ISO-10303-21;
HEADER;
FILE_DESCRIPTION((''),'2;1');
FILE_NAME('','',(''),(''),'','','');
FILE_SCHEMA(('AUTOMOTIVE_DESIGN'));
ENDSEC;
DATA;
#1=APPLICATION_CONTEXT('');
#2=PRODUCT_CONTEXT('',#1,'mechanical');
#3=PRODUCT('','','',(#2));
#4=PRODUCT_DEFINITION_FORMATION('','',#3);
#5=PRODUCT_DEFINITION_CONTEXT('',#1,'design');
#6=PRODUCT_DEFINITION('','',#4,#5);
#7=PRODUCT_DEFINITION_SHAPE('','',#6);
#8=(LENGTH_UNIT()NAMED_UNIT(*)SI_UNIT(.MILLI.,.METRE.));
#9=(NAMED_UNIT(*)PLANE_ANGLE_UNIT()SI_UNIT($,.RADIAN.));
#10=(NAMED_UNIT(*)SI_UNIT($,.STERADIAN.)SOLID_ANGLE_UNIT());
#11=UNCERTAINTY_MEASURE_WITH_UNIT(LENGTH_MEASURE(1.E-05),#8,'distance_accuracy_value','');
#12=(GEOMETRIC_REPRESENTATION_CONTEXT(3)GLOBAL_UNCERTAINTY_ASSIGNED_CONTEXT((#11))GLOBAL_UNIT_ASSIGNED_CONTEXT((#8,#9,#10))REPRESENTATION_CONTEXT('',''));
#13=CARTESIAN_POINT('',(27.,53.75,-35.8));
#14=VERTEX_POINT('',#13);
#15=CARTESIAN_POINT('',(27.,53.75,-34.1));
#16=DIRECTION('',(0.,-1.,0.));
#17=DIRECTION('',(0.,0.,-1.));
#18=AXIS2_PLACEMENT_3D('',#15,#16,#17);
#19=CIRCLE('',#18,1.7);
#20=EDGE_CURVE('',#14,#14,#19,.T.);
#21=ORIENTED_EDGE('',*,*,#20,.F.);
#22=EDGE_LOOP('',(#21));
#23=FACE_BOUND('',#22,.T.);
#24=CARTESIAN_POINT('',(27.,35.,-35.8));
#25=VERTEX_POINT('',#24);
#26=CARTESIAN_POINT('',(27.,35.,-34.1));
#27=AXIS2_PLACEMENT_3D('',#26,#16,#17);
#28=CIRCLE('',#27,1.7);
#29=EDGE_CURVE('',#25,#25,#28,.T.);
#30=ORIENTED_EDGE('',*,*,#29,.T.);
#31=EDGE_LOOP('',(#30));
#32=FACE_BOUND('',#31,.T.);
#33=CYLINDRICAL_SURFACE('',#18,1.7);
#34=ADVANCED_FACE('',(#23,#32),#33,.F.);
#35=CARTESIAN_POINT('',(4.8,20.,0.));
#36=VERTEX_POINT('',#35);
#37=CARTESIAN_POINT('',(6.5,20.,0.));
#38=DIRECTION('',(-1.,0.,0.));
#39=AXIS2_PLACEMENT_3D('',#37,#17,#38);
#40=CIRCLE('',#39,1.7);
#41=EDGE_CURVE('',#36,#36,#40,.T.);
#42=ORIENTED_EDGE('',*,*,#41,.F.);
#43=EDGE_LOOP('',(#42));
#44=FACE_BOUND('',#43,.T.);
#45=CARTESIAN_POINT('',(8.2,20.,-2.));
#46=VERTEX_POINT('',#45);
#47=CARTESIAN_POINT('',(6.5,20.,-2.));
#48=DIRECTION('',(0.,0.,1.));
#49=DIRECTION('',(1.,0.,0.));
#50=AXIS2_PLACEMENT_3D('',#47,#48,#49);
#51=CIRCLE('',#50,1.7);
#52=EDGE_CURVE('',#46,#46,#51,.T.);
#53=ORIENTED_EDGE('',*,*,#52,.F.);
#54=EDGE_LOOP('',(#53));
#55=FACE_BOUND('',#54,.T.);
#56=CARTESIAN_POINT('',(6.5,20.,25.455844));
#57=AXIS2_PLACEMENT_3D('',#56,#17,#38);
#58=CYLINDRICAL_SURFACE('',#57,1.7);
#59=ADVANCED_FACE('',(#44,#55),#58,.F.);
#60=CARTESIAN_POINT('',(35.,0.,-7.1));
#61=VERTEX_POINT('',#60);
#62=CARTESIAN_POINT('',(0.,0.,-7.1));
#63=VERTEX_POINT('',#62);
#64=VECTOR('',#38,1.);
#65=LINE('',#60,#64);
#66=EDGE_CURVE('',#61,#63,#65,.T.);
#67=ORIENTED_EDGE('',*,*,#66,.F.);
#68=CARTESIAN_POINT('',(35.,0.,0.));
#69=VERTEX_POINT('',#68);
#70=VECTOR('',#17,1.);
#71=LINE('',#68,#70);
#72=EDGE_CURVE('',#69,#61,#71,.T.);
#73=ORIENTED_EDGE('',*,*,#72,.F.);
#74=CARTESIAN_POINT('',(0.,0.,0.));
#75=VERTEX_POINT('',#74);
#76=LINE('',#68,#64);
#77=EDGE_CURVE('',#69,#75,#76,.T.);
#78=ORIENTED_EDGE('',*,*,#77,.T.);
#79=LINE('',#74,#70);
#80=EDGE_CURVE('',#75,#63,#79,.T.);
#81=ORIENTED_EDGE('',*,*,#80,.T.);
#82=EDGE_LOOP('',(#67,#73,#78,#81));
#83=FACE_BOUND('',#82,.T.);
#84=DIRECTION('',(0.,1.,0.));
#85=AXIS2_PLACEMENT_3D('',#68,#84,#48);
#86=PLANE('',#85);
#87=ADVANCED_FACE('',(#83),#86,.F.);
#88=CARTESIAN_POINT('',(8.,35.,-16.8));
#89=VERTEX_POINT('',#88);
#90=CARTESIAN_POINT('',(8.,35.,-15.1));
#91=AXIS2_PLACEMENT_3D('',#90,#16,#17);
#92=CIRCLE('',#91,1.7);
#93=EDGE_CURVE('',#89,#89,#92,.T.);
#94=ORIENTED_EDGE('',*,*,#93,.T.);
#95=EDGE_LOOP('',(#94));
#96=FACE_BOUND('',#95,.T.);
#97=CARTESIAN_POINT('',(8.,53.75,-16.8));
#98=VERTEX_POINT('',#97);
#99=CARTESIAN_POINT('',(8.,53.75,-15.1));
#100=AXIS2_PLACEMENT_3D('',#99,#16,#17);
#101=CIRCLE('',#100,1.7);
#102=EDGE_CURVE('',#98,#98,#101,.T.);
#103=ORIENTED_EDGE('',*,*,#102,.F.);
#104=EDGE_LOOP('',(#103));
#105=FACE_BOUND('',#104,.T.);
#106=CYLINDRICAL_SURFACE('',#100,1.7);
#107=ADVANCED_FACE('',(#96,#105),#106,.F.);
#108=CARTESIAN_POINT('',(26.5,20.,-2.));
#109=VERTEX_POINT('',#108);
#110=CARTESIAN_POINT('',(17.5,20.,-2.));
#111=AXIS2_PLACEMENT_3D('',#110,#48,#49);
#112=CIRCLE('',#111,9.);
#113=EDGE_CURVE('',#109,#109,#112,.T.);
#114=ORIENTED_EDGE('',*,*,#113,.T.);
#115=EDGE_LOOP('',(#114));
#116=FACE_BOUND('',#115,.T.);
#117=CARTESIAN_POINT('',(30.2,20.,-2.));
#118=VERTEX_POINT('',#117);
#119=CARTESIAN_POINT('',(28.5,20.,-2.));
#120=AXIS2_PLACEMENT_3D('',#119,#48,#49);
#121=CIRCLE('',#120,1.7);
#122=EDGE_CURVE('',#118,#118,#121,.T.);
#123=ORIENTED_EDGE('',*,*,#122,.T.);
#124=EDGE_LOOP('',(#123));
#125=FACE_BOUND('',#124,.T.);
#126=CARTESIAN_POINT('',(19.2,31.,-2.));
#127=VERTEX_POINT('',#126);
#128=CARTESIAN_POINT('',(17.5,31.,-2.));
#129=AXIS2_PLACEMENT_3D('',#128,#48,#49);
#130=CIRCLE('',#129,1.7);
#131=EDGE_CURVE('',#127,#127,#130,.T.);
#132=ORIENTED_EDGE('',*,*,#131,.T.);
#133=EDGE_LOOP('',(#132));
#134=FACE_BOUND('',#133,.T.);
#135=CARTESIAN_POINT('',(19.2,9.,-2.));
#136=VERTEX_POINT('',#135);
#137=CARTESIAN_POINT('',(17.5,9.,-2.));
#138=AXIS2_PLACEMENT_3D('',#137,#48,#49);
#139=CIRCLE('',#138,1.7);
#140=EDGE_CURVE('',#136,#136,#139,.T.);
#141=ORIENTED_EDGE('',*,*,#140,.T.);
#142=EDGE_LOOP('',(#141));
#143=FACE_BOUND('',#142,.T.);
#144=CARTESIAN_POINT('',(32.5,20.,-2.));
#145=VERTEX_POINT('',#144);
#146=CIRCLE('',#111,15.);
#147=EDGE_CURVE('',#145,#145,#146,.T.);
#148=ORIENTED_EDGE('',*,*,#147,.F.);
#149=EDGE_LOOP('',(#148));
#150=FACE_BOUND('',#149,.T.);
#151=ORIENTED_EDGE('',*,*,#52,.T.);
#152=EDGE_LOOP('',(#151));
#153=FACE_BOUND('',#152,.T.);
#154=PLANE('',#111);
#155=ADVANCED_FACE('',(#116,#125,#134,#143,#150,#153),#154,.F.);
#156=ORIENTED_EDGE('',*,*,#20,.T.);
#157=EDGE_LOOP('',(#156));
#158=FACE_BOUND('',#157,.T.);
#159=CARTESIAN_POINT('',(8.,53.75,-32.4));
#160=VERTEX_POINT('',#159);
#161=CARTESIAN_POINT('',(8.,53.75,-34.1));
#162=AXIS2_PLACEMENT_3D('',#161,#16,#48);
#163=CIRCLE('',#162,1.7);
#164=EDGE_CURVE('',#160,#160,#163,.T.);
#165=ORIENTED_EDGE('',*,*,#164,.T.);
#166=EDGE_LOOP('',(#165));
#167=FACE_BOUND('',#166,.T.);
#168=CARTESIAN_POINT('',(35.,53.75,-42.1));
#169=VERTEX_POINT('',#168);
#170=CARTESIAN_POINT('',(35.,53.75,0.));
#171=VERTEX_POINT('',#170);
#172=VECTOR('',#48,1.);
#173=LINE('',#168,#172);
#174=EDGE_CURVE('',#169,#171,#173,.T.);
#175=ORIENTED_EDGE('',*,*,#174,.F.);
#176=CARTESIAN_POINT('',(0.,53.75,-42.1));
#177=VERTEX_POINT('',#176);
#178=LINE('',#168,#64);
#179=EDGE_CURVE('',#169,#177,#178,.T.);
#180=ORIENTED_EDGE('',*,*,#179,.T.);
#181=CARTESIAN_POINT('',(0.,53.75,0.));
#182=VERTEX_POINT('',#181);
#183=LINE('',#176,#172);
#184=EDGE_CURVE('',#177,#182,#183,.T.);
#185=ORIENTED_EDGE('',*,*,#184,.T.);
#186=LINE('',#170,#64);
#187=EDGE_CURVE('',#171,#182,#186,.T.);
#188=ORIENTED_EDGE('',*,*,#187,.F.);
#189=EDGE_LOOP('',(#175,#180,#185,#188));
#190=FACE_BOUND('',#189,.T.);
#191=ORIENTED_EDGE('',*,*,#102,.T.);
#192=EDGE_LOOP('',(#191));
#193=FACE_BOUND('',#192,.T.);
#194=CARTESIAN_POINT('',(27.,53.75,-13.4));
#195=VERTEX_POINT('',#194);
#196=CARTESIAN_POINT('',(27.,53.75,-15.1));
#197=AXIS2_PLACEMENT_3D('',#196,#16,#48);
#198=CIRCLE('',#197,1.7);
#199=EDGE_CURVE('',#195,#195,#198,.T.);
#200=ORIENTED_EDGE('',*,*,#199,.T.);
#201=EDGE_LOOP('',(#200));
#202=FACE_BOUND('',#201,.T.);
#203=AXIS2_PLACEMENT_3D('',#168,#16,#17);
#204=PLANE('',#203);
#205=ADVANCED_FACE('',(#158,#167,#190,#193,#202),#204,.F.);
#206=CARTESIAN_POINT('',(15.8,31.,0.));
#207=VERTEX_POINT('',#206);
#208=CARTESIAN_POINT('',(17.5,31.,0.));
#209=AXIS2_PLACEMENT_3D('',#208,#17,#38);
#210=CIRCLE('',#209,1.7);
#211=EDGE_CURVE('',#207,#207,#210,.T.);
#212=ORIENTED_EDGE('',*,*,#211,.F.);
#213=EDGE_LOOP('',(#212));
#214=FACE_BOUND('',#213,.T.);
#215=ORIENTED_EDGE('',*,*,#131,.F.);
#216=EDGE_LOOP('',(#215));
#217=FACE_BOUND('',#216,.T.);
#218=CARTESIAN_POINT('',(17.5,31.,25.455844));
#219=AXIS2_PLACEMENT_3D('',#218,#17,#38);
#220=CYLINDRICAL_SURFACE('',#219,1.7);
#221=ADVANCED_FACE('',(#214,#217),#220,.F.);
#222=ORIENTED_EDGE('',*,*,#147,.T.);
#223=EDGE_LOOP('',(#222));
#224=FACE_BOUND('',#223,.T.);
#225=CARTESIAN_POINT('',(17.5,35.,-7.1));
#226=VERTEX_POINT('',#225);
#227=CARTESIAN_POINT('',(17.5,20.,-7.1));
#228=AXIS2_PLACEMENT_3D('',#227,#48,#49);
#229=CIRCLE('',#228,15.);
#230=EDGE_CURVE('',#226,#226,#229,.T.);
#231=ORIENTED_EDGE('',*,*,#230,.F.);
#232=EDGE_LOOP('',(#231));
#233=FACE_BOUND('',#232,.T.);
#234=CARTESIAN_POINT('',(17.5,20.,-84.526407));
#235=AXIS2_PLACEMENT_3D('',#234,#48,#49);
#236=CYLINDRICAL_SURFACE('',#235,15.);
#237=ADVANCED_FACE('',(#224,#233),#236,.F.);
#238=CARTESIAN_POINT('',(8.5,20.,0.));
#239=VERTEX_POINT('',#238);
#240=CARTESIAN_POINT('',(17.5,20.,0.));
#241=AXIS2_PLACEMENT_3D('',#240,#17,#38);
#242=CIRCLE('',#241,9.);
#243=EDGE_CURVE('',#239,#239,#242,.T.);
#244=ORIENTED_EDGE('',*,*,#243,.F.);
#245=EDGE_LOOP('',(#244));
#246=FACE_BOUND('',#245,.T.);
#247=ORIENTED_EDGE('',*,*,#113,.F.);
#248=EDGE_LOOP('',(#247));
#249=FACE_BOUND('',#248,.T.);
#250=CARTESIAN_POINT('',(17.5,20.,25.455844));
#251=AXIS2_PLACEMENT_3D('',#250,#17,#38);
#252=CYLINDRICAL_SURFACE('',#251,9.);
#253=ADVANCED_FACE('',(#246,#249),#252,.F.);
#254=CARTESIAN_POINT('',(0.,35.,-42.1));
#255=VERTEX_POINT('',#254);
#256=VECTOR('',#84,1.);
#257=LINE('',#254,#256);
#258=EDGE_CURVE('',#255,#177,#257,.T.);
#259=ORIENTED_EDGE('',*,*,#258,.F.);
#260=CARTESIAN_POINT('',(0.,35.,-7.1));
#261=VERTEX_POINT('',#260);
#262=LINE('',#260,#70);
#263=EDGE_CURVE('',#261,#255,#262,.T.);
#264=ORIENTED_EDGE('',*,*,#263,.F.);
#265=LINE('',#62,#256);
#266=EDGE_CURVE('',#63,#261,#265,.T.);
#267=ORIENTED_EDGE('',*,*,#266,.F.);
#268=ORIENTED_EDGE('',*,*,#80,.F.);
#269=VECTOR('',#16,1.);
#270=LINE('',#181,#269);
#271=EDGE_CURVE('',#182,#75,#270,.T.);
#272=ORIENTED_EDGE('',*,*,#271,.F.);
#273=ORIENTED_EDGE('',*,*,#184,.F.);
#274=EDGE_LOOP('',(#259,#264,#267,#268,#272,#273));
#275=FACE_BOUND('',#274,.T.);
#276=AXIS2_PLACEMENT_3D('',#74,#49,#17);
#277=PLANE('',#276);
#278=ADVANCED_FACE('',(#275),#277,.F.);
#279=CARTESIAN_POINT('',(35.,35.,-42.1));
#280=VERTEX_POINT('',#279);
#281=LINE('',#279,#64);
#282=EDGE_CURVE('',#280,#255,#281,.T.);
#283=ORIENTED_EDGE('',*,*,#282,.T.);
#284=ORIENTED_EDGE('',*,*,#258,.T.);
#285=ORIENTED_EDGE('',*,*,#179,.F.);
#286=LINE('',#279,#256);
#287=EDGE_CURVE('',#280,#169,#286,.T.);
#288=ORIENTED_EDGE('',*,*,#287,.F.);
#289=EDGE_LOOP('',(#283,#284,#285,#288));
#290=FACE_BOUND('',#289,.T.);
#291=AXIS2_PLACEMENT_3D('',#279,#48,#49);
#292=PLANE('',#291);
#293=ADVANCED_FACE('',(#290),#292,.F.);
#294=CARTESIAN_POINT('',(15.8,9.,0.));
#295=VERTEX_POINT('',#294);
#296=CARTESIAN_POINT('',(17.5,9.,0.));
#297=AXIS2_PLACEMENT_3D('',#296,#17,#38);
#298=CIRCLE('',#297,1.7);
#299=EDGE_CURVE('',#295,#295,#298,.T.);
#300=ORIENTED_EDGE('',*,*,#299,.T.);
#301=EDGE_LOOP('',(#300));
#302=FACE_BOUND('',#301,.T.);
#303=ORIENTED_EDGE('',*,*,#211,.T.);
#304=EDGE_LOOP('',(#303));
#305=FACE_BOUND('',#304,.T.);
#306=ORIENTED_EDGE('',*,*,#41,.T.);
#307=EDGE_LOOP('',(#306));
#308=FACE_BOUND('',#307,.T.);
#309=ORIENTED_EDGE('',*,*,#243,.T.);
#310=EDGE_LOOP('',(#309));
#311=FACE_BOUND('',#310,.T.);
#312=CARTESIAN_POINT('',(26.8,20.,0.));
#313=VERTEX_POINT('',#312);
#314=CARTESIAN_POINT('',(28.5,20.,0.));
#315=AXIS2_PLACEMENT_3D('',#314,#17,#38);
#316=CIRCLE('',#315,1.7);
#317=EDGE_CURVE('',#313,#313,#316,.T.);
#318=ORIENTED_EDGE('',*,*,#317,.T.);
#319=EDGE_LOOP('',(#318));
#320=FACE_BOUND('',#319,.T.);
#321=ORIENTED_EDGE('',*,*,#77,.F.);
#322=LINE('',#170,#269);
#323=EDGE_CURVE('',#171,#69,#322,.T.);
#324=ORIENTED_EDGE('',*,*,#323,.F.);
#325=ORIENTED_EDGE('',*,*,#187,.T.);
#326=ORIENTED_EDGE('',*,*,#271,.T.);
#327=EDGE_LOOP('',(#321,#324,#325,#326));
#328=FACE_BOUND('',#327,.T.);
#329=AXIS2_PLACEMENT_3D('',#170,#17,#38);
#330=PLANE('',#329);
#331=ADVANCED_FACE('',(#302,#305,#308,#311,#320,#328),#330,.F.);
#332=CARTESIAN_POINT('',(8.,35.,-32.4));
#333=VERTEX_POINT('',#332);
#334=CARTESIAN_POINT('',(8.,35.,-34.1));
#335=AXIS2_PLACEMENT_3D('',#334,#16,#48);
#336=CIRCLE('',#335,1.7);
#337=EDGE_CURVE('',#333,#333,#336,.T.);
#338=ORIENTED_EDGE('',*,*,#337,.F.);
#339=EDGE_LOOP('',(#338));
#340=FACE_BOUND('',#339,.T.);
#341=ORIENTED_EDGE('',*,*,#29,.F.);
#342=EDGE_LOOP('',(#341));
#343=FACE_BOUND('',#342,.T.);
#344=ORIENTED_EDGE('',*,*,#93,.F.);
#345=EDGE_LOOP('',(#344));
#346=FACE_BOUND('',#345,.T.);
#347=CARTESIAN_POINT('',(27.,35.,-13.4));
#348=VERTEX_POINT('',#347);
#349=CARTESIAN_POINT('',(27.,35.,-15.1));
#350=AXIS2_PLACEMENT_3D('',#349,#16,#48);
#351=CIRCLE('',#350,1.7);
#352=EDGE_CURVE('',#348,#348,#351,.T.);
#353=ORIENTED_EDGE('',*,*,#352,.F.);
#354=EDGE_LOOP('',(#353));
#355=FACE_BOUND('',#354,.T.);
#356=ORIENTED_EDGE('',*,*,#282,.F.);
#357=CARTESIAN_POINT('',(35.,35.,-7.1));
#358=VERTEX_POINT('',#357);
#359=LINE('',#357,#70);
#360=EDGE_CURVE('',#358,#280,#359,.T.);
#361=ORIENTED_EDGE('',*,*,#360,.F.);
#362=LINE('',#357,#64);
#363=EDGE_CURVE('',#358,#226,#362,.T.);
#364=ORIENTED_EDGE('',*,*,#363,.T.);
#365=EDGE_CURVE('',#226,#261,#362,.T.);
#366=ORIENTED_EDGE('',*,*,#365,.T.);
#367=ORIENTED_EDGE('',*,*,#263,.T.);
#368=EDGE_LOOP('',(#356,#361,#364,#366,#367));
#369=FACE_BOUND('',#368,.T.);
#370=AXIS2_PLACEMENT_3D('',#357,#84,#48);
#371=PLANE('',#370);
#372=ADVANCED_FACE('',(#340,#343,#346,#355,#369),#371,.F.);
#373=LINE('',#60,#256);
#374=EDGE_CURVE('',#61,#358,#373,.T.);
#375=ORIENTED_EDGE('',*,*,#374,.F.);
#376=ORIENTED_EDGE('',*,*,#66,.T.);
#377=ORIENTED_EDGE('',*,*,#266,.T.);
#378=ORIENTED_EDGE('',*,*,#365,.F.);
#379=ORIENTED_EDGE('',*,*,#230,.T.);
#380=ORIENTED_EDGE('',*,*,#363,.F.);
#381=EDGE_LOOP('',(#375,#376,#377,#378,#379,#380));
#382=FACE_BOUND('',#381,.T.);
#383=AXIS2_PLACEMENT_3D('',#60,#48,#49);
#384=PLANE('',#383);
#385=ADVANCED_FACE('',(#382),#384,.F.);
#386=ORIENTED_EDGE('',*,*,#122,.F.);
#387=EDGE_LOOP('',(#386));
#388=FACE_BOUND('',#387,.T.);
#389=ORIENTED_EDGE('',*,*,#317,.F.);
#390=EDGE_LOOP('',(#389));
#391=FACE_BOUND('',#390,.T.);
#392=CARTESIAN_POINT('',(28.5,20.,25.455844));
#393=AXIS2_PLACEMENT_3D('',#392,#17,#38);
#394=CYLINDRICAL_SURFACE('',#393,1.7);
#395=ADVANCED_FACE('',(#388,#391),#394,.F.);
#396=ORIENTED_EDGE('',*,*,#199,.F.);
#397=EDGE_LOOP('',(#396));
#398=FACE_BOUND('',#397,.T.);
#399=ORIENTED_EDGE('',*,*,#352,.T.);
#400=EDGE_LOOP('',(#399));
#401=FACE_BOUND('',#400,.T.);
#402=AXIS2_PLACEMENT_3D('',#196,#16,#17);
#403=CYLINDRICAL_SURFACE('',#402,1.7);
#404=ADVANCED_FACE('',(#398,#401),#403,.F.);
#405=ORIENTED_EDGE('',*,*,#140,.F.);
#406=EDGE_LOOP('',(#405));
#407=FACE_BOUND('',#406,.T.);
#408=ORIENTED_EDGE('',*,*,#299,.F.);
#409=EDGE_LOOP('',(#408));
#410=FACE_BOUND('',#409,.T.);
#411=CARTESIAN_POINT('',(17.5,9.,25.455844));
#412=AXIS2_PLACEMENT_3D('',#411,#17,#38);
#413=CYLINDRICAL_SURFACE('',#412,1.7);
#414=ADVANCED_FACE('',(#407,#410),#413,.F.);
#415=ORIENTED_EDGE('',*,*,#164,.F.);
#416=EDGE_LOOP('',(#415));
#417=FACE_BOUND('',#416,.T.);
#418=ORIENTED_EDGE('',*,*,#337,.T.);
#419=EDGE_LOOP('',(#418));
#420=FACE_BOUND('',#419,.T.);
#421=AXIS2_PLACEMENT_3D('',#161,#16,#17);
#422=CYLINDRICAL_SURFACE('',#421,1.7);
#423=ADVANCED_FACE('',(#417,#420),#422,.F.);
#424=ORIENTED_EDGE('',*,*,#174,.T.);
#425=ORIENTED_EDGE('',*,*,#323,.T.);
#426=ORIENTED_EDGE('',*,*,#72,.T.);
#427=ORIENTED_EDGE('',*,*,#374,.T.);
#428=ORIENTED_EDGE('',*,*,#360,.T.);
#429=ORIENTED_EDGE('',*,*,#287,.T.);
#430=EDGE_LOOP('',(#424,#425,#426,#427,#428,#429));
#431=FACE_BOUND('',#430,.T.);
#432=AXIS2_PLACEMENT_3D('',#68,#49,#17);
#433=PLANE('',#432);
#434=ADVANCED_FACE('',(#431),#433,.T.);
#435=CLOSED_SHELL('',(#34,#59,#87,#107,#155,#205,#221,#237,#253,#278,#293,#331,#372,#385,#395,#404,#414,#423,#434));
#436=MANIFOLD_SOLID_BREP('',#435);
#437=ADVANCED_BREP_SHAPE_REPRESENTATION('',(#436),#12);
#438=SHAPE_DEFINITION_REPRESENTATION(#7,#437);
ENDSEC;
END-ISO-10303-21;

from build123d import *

# Parameters (mm, degrees)
BOSS_EXTRUDE1_DEPTH                = 35
MOTOR_START                        = -7.1
MOTOR_MOUNT_BOLT_HOLES_OUTLINE_R   = 1.7
MOTOR_MOUNT_BOLT_HOLES_OUTLINE_R_2 = 9
MOTOR_MOUNT_BOLT_HOLES_DEPTH       = 7.1
MOTOR_COUNTERSINK_DEPTH            = 5.1
MOTOR_COUNTERSINK_DEPTH_BACK       = 2
MOTOR_COUNTERSINK_START            = -7.1
SKETCH2_5_R                        = 15
SKETCH3_R                          = 1.7
CUT_EXTRUDE3_DEPTH                 = 65.980073869


# Read off the part's stored shape, not the designer's step: Motor mount bolt holes
with BuildPart() as part:
    # Sketch1 → Boss-Extrude1 (new body)
    with BuildSketch(Plane(origin=(0, 0, 0), x_dir=(0, 0, -1), z_dir=(1, 0, 0))):
        Polygon((0, 0), (7.1, 0), (7.1, 35), (42.1, 35), (42.1, 53.75), (0, 53.75), align=None)
    extrude(amount=BOSS_EXTRUDE1_DEPTH)

    # Motor mount bolt holes outline → Motor mount bolt holes (cut)
    with BuildSketch(Plane.XY.offset(MOTOR_START)):
        with Locations((17.5, 9)):
            Circle(MOTOR_MOUNT_BOLT_HOLES_OUTLINE_R)
        with Locations((28.5, 20)):
            Circle(MOTOR_MOUNT_BOLT_HOLES_OUTLINE_R)
        with Locations((17.5, 31)):
            Circle(MOTOR_MOUNT_BOLT_HOLES_OUTLINE_R)
        with Locations((17.5, 20)):
            Circle(MOTOR_MOUNT_BOLT_HOLES_OUTLINE_R_2)
        with Locations((6.5, 20)):
            Circle(MOTOR_MOUNT_BOLT_HOLES_OUTLINE_R)
    extrude(amount=MOTOR_MOUNT_BOLT_HOLES_DEPTH, mode=Mode.SUBTRACT)

    # Sketch2<5> → Motor Countersink (cut, two sides: drawn at the far end of the back side and taken through both)
    with BuildSketch(Plane.XY.offset(MOTOR_COUNTERSINK_START - MOTOR_COUNTERSINK_DEPTH_BACK)):
        with Locations((17.5, 20)):
            Circle(SKETCH2_5_R)
    extrude(amount=MOTOR_COUNTERSINK_DEPTH + MOTOR_COUNTERSINK_DEPTH_BACK, mode=Mode.SUBTRACT)

    # Sketch3 → Cut-Extrude3 (cut, through all)
    with BuildSketch(Plane.XZ.offset(-35)):
        with Locations(Location((8, -15.1, 0), (0, 0, 270))):
            Circle(SKETCH3_R)
        with Locations(Location((27, -15.1, 0), (0, 0, 90))):
            Circle(SKETCH3_R)
        with Locations(Location((27, -34.1, 0), (0, 0, 270))):
            Circle(SKETCH3_R)
        with Locations(Location((8, -34.1, 0), (0, 0, 90))):
            Circle(SKETCH3_R)
    extrude(amount=-CUT_EXTRUDE3_DEPTH, mode=Mode.SUBTRACT)


solid = part.part
